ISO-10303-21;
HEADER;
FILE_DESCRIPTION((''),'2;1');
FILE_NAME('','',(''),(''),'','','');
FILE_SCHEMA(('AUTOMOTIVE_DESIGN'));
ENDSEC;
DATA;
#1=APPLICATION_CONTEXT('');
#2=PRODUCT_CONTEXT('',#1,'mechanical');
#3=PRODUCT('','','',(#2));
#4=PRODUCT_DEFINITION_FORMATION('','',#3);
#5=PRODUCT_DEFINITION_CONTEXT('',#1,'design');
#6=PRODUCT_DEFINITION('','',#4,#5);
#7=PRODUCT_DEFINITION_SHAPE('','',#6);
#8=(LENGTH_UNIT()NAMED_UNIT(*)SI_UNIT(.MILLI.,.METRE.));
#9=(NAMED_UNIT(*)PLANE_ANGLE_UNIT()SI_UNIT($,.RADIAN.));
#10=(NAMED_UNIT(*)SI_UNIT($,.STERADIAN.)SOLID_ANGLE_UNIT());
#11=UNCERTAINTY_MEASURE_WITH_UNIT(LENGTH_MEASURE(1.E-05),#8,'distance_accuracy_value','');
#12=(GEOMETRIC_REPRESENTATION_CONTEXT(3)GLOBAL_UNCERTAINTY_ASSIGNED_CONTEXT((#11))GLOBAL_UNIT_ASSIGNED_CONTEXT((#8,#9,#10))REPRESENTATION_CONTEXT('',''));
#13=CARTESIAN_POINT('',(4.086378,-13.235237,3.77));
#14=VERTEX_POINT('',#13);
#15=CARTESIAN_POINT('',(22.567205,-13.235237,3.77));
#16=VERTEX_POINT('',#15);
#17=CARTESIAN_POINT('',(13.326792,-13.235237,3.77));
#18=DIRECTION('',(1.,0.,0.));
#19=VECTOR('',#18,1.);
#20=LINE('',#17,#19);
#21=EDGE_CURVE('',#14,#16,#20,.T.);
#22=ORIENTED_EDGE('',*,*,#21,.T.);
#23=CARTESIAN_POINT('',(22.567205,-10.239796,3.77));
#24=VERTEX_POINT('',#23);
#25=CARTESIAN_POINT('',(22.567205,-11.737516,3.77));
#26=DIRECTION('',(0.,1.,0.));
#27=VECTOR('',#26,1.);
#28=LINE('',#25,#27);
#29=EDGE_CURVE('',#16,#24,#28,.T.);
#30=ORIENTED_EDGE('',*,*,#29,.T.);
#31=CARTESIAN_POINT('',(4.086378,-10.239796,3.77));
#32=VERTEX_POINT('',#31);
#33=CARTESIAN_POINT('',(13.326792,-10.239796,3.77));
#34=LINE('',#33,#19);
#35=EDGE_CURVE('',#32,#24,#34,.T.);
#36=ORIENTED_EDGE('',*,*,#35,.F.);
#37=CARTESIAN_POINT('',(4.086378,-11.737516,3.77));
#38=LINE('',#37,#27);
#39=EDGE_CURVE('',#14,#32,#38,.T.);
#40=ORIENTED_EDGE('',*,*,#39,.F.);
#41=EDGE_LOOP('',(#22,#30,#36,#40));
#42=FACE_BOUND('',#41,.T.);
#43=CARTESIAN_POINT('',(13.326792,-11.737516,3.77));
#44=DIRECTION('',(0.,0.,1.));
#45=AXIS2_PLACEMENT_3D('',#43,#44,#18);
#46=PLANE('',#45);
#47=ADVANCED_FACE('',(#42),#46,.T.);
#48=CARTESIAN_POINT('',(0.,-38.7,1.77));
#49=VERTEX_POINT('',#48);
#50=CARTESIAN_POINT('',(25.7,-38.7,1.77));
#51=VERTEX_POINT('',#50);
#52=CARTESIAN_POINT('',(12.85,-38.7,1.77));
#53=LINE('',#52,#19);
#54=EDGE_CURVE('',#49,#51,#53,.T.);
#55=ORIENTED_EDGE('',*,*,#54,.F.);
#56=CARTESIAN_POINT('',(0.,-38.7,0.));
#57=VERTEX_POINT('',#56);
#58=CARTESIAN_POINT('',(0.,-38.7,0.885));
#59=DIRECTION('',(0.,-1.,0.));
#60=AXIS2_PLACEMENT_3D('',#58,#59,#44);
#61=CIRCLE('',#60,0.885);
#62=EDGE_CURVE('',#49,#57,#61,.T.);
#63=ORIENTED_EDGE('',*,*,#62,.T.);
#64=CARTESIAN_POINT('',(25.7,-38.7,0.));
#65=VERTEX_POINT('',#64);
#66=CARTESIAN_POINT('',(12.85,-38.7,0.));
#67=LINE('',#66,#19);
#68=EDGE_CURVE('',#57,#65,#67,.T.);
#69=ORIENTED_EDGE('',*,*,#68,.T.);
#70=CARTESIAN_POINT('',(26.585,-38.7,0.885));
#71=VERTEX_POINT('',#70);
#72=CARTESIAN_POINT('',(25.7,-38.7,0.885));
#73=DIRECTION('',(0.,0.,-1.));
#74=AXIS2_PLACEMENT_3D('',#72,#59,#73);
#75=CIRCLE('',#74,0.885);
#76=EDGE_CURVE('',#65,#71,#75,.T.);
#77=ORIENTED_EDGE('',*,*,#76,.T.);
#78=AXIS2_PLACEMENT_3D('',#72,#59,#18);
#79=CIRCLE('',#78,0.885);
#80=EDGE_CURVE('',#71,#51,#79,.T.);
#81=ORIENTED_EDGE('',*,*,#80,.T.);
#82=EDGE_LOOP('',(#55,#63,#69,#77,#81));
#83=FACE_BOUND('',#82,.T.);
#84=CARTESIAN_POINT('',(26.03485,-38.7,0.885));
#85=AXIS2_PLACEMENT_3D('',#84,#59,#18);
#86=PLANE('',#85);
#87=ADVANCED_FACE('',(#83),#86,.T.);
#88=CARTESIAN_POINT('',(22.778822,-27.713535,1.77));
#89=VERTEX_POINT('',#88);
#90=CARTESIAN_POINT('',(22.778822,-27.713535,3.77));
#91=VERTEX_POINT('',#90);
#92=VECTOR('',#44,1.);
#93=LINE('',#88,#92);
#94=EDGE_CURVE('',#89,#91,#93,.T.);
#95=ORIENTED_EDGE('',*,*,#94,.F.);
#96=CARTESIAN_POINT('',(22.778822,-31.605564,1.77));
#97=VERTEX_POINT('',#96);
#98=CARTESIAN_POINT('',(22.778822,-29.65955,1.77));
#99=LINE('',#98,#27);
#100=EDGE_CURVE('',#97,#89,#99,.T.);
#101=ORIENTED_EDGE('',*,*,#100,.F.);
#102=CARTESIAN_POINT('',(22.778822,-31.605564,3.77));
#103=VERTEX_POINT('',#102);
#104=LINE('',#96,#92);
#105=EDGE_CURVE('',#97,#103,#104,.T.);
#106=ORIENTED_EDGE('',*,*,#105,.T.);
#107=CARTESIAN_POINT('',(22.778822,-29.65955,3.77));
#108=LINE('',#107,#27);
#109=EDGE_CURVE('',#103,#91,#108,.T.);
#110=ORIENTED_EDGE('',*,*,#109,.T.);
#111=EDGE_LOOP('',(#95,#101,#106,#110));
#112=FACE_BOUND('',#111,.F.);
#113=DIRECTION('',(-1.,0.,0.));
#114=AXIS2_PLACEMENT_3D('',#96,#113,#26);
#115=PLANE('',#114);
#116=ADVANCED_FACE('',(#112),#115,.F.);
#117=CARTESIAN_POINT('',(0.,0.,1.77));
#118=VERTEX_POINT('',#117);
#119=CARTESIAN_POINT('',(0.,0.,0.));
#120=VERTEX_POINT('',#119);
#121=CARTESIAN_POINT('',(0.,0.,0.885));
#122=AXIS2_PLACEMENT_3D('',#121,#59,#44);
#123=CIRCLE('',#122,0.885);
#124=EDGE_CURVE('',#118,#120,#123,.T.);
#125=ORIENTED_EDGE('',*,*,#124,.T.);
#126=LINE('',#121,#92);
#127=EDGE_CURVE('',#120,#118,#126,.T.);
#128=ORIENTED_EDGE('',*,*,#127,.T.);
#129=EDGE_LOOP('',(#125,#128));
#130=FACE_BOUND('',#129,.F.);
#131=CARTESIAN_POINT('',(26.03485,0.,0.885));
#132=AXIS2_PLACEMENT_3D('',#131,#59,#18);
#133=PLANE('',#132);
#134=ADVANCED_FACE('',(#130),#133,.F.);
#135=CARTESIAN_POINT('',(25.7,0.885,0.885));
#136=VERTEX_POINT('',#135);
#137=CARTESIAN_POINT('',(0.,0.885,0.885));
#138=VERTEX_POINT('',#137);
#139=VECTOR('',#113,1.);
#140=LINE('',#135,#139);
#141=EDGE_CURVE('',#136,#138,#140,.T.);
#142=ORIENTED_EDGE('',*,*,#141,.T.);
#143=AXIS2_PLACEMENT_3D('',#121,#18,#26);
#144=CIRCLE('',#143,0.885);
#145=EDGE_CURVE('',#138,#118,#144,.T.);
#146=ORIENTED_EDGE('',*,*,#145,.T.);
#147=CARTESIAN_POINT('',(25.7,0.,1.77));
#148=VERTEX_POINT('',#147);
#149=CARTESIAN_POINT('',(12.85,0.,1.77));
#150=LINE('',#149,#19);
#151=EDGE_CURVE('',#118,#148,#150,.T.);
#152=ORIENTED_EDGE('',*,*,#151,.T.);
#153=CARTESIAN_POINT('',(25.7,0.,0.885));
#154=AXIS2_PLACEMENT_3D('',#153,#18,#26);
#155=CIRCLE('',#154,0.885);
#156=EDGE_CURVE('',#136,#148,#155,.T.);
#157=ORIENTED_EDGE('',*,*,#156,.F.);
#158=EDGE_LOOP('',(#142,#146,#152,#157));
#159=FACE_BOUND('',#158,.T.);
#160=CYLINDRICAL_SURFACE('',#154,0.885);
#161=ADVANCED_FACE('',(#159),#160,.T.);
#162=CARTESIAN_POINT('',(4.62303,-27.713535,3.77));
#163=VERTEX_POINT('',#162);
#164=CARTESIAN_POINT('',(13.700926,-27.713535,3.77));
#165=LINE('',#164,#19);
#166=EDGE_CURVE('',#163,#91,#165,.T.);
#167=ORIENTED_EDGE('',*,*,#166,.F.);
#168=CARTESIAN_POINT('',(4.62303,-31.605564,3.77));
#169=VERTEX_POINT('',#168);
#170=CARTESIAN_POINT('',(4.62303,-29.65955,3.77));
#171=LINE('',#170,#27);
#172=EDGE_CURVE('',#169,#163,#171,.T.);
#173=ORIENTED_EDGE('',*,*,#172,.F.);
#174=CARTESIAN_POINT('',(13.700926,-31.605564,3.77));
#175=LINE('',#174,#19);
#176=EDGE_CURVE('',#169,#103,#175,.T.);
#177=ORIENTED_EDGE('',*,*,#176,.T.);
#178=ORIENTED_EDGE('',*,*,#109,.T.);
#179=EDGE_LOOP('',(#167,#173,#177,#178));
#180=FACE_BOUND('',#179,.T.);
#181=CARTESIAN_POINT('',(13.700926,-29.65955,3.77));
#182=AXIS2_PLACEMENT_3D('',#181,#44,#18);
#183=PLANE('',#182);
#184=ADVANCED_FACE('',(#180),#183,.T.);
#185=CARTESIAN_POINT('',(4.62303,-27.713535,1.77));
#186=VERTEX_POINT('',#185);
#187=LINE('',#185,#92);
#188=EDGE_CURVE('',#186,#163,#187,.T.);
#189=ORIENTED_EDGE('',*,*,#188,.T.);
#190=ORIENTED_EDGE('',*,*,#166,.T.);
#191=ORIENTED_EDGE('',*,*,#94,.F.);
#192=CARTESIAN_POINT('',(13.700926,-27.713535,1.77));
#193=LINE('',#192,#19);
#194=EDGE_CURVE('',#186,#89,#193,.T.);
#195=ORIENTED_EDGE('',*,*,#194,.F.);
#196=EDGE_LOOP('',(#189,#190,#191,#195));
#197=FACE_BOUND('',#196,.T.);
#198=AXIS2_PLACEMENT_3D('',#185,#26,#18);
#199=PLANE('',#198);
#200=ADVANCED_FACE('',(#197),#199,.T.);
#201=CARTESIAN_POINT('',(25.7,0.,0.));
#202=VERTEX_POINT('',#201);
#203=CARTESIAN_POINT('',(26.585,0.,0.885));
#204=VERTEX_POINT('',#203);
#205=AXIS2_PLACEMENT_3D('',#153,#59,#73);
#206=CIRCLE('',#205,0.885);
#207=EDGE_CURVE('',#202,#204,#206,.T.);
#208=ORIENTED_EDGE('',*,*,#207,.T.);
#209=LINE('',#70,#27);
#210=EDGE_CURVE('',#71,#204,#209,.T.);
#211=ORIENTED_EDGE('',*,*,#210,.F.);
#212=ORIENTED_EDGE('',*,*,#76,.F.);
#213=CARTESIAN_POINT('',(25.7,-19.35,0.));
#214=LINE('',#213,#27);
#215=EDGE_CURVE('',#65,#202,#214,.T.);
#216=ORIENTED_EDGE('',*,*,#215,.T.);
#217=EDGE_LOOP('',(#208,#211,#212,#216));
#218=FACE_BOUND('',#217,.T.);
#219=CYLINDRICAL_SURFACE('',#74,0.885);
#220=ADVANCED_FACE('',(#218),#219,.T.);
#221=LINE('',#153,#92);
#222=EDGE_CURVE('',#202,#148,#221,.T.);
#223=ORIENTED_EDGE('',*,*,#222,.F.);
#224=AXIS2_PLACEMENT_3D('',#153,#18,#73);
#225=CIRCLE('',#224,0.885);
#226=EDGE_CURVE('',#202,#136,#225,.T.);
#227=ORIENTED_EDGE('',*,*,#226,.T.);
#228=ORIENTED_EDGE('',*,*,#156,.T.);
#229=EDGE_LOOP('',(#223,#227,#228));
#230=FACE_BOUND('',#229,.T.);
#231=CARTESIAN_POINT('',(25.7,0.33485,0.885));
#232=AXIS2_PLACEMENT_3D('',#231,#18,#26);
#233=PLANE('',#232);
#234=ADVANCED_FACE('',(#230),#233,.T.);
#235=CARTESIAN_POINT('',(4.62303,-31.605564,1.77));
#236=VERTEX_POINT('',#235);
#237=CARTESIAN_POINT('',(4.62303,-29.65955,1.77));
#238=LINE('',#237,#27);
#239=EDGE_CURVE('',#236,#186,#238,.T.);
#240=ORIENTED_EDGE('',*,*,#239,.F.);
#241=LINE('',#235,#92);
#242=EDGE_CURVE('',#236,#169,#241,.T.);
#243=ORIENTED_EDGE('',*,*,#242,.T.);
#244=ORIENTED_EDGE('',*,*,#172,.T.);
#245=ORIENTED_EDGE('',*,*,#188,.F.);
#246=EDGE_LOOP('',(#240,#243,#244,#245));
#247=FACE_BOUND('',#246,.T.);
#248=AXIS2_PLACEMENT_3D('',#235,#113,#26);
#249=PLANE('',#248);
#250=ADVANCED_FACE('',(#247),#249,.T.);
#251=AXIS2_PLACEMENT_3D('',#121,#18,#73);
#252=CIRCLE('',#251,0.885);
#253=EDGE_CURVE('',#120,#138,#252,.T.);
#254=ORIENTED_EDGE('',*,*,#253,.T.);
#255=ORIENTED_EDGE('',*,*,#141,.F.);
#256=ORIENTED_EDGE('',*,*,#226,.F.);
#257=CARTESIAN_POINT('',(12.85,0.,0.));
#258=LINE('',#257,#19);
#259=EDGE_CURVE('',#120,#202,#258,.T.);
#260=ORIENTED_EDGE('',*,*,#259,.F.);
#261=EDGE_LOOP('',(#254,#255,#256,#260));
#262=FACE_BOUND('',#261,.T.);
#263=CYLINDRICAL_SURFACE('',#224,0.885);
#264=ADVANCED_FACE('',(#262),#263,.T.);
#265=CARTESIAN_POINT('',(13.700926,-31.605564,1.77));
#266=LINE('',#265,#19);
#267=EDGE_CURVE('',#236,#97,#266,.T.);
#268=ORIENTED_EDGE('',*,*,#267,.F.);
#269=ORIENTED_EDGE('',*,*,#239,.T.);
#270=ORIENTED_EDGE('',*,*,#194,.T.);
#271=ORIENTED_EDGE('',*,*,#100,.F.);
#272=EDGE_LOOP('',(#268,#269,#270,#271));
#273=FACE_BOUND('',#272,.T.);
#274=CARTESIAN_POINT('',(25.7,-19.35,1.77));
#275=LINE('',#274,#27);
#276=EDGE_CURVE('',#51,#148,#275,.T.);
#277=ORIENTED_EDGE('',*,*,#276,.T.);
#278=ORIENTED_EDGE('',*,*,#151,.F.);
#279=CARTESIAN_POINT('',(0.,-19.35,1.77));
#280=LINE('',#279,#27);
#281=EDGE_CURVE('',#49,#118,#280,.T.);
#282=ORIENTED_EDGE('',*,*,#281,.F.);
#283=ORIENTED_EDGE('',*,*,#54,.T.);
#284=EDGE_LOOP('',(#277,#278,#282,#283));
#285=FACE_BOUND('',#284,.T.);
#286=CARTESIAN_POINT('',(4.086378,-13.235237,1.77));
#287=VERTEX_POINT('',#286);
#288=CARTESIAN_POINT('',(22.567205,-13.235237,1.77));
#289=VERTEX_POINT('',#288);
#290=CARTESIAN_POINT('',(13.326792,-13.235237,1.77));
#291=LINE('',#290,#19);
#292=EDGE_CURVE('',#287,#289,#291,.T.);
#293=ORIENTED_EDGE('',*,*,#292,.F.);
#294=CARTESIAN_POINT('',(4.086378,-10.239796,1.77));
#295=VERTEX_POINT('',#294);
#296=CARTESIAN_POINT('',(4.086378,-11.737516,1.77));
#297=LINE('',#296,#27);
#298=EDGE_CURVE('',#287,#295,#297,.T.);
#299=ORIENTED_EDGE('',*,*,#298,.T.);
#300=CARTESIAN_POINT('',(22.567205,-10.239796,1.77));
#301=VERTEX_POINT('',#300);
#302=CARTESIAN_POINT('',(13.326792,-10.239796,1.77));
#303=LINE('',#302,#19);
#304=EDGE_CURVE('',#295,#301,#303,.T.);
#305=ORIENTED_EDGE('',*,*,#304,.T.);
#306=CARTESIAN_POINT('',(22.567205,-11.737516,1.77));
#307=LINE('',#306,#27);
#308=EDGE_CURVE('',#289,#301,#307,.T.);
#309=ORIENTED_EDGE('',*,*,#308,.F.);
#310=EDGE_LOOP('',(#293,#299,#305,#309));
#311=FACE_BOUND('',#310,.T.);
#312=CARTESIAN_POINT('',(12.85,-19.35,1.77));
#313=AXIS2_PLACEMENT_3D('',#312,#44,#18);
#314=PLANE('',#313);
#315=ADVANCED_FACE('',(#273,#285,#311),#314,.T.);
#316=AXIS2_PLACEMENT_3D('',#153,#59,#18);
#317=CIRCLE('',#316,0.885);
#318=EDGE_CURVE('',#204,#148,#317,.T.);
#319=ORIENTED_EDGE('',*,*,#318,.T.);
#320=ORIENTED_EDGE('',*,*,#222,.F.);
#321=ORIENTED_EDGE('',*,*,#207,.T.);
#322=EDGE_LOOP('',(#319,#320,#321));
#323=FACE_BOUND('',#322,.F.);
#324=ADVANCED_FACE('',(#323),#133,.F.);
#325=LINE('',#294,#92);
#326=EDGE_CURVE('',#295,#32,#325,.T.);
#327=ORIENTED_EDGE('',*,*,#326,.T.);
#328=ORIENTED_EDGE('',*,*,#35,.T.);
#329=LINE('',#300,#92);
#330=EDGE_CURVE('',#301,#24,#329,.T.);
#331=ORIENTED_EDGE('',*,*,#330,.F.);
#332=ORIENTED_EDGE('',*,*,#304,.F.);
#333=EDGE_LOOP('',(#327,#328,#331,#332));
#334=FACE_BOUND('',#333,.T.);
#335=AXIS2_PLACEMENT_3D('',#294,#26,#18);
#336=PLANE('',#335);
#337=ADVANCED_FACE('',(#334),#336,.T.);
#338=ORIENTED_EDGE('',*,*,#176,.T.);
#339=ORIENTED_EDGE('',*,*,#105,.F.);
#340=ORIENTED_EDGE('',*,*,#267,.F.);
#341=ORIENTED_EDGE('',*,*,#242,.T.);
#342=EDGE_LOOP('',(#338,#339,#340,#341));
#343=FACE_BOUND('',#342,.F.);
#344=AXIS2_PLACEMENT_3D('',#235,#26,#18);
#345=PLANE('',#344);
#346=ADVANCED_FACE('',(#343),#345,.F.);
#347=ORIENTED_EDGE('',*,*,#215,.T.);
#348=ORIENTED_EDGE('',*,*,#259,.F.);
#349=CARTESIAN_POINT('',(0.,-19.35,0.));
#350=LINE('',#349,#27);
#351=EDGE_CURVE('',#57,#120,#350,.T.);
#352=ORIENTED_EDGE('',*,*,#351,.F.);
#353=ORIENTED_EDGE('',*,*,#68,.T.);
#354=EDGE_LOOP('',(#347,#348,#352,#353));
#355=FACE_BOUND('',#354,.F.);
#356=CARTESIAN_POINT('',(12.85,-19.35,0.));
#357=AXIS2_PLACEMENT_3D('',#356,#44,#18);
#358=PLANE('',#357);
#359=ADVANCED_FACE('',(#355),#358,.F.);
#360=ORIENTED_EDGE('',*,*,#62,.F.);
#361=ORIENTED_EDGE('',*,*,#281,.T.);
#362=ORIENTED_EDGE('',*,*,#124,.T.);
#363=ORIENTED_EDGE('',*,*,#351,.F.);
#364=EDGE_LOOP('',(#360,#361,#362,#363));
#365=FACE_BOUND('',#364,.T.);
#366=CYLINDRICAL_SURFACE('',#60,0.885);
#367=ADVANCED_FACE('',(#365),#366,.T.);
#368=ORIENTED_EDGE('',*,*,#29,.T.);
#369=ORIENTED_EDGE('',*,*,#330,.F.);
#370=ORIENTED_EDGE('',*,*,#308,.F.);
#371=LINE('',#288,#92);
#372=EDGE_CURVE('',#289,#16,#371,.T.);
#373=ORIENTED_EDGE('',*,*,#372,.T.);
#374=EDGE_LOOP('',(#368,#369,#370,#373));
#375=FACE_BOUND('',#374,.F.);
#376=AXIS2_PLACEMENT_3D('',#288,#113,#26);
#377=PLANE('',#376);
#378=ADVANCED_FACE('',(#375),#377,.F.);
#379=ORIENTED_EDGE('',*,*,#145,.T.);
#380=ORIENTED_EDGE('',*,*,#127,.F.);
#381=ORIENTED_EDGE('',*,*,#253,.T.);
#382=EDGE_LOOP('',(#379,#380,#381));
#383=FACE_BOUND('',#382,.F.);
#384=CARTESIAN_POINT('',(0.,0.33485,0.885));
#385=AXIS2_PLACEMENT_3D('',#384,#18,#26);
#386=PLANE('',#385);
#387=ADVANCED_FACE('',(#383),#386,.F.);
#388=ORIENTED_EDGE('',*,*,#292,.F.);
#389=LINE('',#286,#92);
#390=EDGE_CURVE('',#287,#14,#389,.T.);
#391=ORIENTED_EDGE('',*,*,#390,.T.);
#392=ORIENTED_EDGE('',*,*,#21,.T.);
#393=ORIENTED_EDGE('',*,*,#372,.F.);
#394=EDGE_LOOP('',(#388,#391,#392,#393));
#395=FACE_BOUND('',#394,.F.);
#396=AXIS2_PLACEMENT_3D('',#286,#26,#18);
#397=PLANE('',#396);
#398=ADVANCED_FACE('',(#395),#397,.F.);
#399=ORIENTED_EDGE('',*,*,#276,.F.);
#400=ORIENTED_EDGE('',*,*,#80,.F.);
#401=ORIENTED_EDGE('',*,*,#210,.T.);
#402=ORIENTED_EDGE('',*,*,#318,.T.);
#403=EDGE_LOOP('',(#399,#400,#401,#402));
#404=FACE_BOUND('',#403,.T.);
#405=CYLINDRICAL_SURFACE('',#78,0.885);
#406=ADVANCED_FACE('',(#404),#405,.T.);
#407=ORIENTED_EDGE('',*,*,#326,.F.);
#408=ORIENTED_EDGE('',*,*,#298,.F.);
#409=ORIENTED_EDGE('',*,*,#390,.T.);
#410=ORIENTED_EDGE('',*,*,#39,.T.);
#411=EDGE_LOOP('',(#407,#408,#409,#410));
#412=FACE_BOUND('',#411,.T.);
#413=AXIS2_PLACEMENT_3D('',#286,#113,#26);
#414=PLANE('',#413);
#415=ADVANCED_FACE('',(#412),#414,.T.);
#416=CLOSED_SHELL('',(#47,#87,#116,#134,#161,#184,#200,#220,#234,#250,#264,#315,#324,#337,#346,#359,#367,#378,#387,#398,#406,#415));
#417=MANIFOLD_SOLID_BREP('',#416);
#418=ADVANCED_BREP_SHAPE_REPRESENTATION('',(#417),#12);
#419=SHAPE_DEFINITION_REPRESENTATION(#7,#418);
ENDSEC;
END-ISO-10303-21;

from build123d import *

# Parameters (mm, degrees)
F0_W     = 25.7
F0_H     = 38.7
F1_DEPTH = 1.77
F4_DEPTH = 38.7
F5_DEPTH = 25.7
F6_W     = 18.1557917967
F6_H     = 3.8920287043
F6_W_2   = 18.4808271006
F6_H_2   = 2.9954407364
F7_DEPTH = 2


with BuildPart() as f1:
    # F0 (on Top) → F1 (new body)
    with BuildSketch(Plane.XY):
        with Locations((12.85, -19.35)):
            Rectangle(F0_W, F0_H)
    extrude(amount=F1_DEPTH)

    # F2 (on face) → F4 (join)
    with BuildSketch(Plane.XZ.offset(38.7)):
        with BuildLine():
            ThreePointArc((25.7, 0), (26.3257895014, 0.2592104986), (26.585, 0.885))
            ThreePointArc((26.585, 0.885), (26.3257895014, 1.5107895014), (25.7, 1.77))
            Line((25.7, 1.77), (25.7, 0))
        make_face()
        with BuildLine():
            Line((25.7, 0), (25.7, 1.77))
            ThreePointArc((25.7, 1.77), (24.815, 0.885), (25.7, 0))
        make_face()
        with BuildLine():
            Line((0, 0), (0, 1.77))
            ThreePointArc((0, 1.77), (-0.885, 0.885), (0, 0))
        make_face()
    extrude(amount=-F4_DEPTH)

    # F3 (on face) → F5 (join)
    with BuildSketch(Plane.YZ.offset(25.7)):
        with BuildLine():
            ThreePointArc((0, 0), (0.6257895014, 0.2592104986), (0.885, 0.885))
            ThreePointArc((0.885, 0.885), (0.6257895014, 1.5107895014), (0, 1.77))
            Line((0, 1.77), (0, 0))
        make_face()
        with BuildLine():
            Line((0, 0), (0, 1.77))
            ThreePointArc((0, 1.77), (-0.885, 0.885), (0, 0))
        make_face()
    extrude(amount=-F5_DEPTH)

    # F6 (on face) → F7 (join)
    with BuildSketch(Plane.XY.offset(1.77)):
        with Locations((13.7009262107, -29.6595497057)):
            Rectangle(F6_W, F6_H)
        with Locations((13.3267915808, -11.7375161499)):
            Rectangle(F6_W_2, F6_H_2)
    extrude(amount=F7_DEPTH)


solid = f1.part
